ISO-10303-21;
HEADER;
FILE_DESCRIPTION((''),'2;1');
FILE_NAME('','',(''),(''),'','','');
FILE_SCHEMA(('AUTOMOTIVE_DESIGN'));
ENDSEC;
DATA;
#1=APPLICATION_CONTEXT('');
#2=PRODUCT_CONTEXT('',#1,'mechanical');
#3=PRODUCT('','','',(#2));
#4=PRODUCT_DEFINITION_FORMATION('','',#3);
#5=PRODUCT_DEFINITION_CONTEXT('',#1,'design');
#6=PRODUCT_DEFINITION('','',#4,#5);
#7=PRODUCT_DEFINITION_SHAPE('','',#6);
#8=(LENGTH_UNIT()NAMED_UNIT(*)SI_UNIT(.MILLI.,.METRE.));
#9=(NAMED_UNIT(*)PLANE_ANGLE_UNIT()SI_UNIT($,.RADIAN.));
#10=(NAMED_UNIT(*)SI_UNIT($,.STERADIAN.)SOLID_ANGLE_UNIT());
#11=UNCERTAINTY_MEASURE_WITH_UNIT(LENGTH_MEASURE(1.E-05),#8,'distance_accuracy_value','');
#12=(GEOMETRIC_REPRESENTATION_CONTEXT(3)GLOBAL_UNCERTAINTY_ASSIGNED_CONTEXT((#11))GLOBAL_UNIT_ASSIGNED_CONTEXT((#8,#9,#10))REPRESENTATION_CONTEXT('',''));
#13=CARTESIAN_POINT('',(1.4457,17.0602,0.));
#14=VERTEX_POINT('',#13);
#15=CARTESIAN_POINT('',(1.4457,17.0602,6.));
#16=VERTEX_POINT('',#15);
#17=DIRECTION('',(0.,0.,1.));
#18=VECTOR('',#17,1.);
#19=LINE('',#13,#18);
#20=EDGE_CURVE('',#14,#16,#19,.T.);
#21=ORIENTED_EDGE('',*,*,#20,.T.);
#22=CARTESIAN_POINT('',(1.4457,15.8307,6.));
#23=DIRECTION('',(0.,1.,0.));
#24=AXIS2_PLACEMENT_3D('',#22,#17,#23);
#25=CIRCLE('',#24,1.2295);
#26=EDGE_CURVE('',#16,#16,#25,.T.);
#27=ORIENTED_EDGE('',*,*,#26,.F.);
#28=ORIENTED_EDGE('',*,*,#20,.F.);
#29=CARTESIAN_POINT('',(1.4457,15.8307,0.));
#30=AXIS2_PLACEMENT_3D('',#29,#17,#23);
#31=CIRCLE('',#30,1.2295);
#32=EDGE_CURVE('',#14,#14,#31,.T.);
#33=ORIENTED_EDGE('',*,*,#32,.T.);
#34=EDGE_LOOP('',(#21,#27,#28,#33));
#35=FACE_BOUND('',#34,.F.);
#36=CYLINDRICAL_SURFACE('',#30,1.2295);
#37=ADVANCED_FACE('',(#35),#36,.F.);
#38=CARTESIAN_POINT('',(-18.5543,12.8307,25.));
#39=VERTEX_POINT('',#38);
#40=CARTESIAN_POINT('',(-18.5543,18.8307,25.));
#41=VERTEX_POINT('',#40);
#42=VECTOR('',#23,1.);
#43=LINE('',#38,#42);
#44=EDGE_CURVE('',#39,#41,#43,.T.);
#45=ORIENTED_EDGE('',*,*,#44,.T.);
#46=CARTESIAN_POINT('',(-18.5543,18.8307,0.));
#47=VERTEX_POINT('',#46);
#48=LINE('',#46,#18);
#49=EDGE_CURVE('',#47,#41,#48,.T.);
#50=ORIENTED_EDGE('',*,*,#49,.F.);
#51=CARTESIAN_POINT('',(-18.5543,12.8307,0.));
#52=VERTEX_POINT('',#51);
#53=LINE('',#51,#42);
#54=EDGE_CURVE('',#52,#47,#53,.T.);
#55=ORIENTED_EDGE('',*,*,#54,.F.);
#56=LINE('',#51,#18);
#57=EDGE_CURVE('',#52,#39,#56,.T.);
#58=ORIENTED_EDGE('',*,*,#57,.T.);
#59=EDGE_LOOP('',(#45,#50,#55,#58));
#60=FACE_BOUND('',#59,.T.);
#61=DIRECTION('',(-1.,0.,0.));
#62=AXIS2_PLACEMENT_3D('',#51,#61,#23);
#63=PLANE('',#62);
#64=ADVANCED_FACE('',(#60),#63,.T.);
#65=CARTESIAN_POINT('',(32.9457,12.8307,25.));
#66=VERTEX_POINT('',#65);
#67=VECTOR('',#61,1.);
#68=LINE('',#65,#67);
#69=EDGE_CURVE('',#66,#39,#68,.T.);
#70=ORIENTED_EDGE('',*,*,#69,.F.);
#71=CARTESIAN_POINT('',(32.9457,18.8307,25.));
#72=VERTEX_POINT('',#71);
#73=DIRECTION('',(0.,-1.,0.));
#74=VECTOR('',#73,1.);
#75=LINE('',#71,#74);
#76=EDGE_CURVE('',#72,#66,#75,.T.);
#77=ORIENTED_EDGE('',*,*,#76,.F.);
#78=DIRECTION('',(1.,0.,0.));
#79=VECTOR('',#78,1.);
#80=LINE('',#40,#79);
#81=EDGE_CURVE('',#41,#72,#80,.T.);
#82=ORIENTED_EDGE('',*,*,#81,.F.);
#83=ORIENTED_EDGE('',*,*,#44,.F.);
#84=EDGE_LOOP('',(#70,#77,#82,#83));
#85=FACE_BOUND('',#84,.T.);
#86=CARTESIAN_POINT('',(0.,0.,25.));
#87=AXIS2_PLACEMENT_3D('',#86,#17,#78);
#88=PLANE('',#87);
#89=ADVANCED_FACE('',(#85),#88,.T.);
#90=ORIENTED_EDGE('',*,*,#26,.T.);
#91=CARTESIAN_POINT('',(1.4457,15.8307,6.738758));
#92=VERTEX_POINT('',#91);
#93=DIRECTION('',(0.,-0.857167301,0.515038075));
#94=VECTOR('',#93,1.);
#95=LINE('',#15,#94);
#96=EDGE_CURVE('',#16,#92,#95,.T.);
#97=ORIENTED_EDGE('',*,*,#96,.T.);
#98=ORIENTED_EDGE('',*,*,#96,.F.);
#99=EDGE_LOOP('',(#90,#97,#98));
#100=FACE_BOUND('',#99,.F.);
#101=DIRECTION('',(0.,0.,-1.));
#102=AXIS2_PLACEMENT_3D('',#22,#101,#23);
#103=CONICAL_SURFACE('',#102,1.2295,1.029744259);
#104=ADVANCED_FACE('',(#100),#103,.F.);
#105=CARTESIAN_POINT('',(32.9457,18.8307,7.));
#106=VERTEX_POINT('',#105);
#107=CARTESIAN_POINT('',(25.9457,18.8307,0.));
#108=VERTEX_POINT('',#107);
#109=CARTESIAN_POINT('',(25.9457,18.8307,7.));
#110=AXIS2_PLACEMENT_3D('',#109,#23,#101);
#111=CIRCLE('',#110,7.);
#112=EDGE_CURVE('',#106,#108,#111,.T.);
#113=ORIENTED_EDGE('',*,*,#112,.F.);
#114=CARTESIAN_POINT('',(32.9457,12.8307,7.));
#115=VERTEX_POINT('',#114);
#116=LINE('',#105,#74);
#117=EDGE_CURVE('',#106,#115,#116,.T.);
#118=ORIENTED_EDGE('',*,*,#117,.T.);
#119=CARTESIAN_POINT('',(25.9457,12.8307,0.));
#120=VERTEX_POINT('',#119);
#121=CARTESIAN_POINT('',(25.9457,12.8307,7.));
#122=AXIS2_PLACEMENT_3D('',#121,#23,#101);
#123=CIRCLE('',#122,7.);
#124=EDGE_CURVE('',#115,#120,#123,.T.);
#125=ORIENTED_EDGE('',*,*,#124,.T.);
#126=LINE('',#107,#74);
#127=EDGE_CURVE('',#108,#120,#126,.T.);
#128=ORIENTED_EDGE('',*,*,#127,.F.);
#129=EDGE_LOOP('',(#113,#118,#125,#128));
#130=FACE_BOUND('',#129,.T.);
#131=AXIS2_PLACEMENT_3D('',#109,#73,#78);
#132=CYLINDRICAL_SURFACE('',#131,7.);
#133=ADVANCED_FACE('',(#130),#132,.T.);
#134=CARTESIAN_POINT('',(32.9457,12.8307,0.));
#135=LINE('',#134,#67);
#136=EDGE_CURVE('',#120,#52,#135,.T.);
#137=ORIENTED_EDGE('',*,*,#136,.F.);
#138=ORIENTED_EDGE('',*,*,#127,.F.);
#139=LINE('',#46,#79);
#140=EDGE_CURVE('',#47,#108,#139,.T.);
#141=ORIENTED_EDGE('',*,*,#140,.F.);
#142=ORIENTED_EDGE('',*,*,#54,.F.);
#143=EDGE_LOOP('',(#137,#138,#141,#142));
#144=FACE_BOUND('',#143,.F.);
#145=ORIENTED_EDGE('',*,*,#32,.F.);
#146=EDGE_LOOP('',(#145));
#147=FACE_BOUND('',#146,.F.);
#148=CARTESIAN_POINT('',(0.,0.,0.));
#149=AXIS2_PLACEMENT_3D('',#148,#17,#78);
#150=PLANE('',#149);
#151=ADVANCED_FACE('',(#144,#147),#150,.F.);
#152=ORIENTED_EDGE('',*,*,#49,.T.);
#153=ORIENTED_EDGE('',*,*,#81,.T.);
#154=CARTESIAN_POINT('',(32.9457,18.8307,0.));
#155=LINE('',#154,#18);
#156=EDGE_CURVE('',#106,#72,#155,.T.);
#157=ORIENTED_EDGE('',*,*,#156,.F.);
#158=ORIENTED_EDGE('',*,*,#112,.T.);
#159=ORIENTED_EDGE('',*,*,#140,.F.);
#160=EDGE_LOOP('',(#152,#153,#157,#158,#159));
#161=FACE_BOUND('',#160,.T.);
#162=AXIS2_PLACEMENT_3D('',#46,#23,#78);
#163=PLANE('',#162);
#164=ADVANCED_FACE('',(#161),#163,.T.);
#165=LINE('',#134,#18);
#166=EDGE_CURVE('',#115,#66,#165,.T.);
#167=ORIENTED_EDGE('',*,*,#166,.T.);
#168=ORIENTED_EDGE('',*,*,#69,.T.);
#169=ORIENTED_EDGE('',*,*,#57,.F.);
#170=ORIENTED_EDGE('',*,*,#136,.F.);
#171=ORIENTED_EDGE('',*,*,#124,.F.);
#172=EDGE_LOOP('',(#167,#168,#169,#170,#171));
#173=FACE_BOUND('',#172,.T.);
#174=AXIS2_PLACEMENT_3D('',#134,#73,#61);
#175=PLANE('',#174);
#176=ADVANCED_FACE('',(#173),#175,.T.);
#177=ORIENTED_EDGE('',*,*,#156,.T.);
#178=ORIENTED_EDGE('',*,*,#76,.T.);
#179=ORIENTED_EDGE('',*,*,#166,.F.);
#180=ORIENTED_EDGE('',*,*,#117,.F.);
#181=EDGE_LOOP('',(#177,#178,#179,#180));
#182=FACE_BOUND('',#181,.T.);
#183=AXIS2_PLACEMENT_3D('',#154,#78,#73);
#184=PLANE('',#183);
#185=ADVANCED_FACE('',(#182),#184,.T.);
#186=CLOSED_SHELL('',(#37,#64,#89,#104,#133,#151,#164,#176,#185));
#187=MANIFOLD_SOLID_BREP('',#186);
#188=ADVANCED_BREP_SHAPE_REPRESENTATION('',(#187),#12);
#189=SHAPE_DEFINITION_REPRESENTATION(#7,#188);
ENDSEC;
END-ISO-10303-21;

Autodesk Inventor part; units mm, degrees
ref_plane "YZ Plane" through (0, 0, 0) normal (1, 0, 0) x (0, 1, 0)
ref_plane "XZ Plane" through (0, 0, 0) normal (0, 1, 0) x (-1, 0, 0)
ref_plane "XY Plane" through (0, 0, 0) normal (0, 0, 1) x (1, 0, 0)
sketch "Sketch1" plane through (0, 0, 0) normal (0, 0, 1) x (1, 0, 0)
  line L0 (-18.5543, 18.8307) -> (32.9457, 18.8307)
  line L1 (32.9457, 18.8307) -> (32.9457, 12.8307)
  line L2 (32.9457, 12.8307) -> (-18.5543, 12.8307)
  line L3 (-18.5543, 12.8307) -> (-18.5543, 18.8307)
  line L4 (-64.2543, 64.8307) -> (-64.2543, -33.1693) construction
  line L5 (32.9457, 15.8307) -> (-64.2543, 15.8307) construction
  line L6 (9.4457, -32.9193) -> (9.4457, 64.5807) construction
  point P0 (32.9457, 15.8307)
  dimension "d2" = 51.5
  dimension "d3" = 6
  dimension "d4" = 23.5
extrude "Extrusion1" add sketch "Sketch1" along normal blind 25
sketch "Sketch2" plane through (0, 0, 0) normal (0, 0, -1) x (-1, 0, 0)
  line L0 (18.5543, 18.8307) -> (18.5543, 12.8307) construction
  point P0 (0, 0)
  point P1 (-1.4457, 15.8307)
  point P2 (18.5543, 15.8307)
  dimension "d5" = 20
hole "Hole1" at (1.4457, 15.8307, 0) direction (0, 0, 1) diameter 2.459 depth 6 tip angle 118 thread size "M3x0.5" class "6H" standard "ISO Metric profile"
extrude "Extrusion2" [suppressed]
fillet "Fillet1" radius 7 1 edges at (32.9457, 15.8307, 0)
properties part number "Przegroda" material "Aluminum 6061"
